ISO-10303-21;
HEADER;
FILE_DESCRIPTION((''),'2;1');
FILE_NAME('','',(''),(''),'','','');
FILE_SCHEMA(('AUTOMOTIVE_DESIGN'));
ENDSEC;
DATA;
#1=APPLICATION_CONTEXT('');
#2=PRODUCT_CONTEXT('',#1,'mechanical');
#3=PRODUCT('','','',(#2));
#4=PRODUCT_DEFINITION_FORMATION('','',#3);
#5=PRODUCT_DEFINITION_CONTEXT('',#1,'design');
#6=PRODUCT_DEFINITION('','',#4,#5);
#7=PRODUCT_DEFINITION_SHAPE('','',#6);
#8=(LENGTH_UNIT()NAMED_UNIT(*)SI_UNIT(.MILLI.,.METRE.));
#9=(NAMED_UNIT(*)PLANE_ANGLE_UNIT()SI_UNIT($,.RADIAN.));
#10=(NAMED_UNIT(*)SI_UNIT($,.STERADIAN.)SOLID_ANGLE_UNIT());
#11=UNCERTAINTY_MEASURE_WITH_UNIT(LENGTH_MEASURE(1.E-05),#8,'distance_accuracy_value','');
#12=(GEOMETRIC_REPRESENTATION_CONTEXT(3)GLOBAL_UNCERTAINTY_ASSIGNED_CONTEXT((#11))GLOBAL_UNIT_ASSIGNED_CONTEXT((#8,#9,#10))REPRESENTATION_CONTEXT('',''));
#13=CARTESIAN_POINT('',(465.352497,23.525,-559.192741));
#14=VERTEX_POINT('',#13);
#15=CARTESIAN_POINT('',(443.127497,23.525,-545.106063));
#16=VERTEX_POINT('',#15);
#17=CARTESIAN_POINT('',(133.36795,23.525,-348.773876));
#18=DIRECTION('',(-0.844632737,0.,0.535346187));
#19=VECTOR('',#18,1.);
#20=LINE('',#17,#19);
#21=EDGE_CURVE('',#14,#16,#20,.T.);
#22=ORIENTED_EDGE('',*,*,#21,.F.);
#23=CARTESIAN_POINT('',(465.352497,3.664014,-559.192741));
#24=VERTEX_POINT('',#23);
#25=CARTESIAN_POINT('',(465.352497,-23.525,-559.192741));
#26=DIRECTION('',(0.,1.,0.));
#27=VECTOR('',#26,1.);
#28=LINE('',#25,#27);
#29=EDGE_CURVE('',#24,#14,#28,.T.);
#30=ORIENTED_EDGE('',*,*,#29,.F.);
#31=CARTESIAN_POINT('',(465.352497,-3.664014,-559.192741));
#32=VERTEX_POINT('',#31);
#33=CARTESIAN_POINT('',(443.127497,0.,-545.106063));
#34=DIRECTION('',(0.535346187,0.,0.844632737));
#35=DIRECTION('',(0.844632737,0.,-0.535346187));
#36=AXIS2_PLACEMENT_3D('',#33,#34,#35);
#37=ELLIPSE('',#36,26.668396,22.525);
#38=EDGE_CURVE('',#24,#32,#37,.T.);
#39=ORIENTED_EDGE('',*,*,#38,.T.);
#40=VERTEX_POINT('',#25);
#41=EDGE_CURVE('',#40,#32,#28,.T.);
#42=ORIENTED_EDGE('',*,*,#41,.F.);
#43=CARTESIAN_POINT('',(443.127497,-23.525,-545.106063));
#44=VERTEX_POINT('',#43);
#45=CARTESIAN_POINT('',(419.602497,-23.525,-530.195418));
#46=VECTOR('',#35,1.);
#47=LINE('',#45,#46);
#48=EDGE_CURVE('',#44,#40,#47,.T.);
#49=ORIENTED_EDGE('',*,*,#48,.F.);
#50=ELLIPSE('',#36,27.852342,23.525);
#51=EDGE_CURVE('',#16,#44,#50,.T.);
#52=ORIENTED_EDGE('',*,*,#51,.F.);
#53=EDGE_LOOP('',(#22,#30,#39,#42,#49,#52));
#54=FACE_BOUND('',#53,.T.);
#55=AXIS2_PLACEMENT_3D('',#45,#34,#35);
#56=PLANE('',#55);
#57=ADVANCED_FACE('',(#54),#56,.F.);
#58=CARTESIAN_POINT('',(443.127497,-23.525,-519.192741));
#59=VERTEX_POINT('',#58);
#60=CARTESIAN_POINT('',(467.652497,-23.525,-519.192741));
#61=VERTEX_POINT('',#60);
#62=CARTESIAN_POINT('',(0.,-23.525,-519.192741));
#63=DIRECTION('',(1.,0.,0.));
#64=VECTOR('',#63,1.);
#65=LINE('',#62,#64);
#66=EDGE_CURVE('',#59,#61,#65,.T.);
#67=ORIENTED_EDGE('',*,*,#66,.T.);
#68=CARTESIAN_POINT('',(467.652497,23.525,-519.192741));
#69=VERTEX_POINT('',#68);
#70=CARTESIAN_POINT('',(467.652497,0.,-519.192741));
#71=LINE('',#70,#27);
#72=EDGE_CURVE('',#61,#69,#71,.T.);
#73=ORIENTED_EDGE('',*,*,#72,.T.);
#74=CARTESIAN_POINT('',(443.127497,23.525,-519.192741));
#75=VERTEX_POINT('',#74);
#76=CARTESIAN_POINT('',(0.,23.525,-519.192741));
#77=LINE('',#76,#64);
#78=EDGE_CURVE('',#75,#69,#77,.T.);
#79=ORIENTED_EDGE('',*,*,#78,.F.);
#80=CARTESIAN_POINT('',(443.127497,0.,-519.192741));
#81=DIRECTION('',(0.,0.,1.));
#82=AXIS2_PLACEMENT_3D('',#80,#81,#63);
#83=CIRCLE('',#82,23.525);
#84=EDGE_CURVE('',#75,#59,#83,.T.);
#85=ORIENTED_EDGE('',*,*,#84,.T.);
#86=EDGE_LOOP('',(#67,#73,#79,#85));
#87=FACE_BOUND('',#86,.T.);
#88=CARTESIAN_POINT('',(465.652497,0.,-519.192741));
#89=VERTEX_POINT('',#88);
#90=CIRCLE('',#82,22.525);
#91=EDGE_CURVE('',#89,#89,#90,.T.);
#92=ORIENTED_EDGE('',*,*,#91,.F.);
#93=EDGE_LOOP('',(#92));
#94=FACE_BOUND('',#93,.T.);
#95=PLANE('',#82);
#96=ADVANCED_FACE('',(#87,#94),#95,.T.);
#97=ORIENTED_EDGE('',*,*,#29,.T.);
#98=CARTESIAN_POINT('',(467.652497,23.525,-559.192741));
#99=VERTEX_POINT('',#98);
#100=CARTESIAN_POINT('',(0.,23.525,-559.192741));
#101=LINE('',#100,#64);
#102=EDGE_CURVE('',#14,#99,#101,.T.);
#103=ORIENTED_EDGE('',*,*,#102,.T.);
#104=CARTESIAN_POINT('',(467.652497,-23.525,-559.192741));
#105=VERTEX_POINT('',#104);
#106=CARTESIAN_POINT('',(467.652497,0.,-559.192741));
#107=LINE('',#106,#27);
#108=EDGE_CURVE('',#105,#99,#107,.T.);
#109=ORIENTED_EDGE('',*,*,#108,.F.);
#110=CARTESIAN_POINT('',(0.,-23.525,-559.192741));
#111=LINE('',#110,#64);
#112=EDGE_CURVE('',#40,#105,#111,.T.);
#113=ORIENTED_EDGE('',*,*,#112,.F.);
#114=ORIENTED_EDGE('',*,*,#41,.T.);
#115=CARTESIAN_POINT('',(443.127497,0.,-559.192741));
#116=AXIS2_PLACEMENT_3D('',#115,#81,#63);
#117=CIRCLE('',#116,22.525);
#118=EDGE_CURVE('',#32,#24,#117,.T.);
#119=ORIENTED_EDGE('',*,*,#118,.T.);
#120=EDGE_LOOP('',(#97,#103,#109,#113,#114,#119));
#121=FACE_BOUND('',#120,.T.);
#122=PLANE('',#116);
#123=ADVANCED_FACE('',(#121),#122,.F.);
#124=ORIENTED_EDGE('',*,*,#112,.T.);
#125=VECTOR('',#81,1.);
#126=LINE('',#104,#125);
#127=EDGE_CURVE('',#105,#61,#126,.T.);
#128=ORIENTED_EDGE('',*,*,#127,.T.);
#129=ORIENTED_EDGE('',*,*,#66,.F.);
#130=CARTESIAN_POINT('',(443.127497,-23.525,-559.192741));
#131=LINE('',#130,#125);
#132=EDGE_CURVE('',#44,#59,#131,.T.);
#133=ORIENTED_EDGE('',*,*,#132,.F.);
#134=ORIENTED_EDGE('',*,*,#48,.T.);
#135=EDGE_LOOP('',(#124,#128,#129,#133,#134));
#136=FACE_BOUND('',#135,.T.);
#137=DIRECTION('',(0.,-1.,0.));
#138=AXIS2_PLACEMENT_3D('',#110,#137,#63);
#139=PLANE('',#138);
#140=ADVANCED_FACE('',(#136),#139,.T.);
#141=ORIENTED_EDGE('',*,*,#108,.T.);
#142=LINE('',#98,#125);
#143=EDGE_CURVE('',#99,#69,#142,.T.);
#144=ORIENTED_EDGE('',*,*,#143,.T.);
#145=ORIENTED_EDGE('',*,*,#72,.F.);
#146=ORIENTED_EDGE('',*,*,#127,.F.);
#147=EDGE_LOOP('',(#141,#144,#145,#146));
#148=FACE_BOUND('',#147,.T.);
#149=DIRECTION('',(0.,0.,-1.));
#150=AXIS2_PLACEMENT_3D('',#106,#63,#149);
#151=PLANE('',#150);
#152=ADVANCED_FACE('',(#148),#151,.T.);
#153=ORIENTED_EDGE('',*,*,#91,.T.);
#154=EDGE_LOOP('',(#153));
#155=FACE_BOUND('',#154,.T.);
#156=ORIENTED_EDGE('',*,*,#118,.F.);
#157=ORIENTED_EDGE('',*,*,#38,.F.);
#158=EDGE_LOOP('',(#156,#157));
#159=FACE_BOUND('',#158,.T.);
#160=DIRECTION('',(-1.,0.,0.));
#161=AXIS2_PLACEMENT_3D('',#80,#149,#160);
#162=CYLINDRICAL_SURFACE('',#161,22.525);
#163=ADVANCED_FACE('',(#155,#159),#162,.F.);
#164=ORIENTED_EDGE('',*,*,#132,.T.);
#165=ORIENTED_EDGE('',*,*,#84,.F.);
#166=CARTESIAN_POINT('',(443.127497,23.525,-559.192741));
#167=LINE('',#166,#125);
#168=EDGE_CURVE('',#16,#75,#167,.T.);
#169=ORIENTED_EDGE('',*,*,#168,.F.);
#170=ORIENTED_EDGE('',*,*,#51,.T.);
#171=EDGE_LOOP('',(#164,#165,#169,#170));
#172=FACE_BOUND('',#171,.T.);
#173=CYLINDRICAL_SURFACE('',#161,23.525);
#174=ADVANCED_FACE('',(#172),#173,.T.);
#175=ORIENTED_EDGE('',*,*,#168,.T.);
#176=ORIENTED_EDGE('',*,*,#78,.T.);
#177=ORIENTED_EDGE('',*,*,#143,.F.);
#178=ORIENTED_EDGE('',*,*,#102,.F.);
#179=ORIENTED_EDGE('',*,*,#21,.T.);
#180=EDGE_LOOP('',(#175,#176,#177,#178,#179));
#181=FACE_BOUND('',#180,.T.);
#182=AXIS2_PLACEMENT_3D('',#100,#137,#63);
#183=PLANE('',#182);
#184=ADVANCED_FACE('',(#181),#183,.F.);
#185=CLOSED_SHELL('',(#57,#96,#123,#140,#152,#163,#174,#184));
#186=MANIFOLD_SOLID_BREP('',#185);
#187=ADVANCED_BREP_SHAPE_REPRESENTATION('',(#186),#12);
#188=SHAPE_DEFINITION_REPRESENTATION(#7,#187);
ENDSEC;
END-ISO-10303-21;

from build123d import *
from OCP.BRepAlgoAPI import BRepAlgoAPI_Cut
from OCP.TopTools import TopTools_ListOfShape

# Parameters (mm, degrees)
BOSS_EXTRUDE1_START     = -559.192741
SKETCH1_R               = 23.525
SKETCH1_R_2             = 22.525
BOSS_EXTRUDE1_DEPTH     = 40.000001
BOSS_EXTRUDE2_START     = -40
BOSS_EXTRUDE2_DEPTH     = 40
CUT_EXTRUDE1_DEPTH      = 730.348205675
CUT_EXTRUDE1_DEPTH_BACK = 730.348205675


with BuildPart() as part:
    # Sketch1 → Boss-Extrude1 (new body)
    with BuildSketch(Plane.XY.offset(BOSS_EXTRUDE1_START)):
        with Locations((443.127496957, 0)):
            Circle(SKETCH1_R)
        with Locations((443.127496957, 0)):
            Circle(SKETCH1_R_2, mode=Mode.SUBTRACT)
    extrude(amount=BOSS_EXTRUDE1_DEPTH)

    # Sketch2 → Boss-Extrude2 (add)
    with BuildSketch(Plane.XY.offset(-519.192740522).offset(BOSS_EXTRUDE2_START)):
        Polygon((466.652496957, -23.525), (467.652496957, -23.525), (467.652496957, 23.525), (466.652496957, 23.525), (466.652496957, 0), align=None)
        with BuildLine():
            Line((466.652496957, 23.525), (443.127496957, 23.525))
            ThreePointArc((443.127496957, 23.525), (459.762183984, 16.634687027), (466.652496957, 0))
            Line((466.652496957, 0), (466.652496957, 23.525))
        make_face()
        with BuildLine():
            Line((466.652496957, -23.525), (466.652496957, 0))
            ThreePointArc((466.652496957, 0), (459.762183984, -16.634687027), (443.127496957, -23.525))
            Line((443.127496957, -23.525), (466.652496957, -23.525))
        make_face()
    extrude(amount=BOSS_EXTRUDE2_DEPTH)


with BuildPart() as cut_extrude1_tool:
    # Sketch3 → Cut-Extrude1 (new, two sides: drawn at the far end of the back side and taken through both)
    with BuildSketch(Plane(origin=(0, 0, 0), x_dir=(1, 0, 0), z_dir=(0, 1, 0)).offset(-CUT_EXTRUDE1_DEPTH_BACK)):
        Polygon((419.602496957, 530.195417764), (465.352496957, 559.192740522), (443.127496957, 559.192740522), (419.602496957, 559.192740522), align=None)
    extrude(amount=CUT_EXTRUDE1_DEPTH + CUT_EXTRUDE1_DEPTH_BACK)


with BuildPart() as part_1:
    add(part.part)

    # Cut-Extrude1: cut by cut_extrude1_tool, with a tolerance
    cut_extrude1_stock = TopTools_ListOfShape()
    cut_extrude1_stock.Append(part_1.part.wrapped)
    cut_extrude1_tools = TopTools_ListOfShape()
    cut_extrude1_tools.Append(cut_extrude1_tool.part.wrapped)
    cut_extrude1_cut = BRepAlgoAPI_Cut()
    cut_extrude1_cut.SetArguments(cut_extrude1_stock)
    cut_extrude1_cut.SetTools(cut_extrude1_tools)
    cut_extrude1_cut.SetFuzzyValue(0.00001)
    cut_extrude1_cut.Build()
    add(Compound.cast(cut_extrude1_cut.Shape()).solids(), mode=Mode.REPLACE)


solid = part_1.part
